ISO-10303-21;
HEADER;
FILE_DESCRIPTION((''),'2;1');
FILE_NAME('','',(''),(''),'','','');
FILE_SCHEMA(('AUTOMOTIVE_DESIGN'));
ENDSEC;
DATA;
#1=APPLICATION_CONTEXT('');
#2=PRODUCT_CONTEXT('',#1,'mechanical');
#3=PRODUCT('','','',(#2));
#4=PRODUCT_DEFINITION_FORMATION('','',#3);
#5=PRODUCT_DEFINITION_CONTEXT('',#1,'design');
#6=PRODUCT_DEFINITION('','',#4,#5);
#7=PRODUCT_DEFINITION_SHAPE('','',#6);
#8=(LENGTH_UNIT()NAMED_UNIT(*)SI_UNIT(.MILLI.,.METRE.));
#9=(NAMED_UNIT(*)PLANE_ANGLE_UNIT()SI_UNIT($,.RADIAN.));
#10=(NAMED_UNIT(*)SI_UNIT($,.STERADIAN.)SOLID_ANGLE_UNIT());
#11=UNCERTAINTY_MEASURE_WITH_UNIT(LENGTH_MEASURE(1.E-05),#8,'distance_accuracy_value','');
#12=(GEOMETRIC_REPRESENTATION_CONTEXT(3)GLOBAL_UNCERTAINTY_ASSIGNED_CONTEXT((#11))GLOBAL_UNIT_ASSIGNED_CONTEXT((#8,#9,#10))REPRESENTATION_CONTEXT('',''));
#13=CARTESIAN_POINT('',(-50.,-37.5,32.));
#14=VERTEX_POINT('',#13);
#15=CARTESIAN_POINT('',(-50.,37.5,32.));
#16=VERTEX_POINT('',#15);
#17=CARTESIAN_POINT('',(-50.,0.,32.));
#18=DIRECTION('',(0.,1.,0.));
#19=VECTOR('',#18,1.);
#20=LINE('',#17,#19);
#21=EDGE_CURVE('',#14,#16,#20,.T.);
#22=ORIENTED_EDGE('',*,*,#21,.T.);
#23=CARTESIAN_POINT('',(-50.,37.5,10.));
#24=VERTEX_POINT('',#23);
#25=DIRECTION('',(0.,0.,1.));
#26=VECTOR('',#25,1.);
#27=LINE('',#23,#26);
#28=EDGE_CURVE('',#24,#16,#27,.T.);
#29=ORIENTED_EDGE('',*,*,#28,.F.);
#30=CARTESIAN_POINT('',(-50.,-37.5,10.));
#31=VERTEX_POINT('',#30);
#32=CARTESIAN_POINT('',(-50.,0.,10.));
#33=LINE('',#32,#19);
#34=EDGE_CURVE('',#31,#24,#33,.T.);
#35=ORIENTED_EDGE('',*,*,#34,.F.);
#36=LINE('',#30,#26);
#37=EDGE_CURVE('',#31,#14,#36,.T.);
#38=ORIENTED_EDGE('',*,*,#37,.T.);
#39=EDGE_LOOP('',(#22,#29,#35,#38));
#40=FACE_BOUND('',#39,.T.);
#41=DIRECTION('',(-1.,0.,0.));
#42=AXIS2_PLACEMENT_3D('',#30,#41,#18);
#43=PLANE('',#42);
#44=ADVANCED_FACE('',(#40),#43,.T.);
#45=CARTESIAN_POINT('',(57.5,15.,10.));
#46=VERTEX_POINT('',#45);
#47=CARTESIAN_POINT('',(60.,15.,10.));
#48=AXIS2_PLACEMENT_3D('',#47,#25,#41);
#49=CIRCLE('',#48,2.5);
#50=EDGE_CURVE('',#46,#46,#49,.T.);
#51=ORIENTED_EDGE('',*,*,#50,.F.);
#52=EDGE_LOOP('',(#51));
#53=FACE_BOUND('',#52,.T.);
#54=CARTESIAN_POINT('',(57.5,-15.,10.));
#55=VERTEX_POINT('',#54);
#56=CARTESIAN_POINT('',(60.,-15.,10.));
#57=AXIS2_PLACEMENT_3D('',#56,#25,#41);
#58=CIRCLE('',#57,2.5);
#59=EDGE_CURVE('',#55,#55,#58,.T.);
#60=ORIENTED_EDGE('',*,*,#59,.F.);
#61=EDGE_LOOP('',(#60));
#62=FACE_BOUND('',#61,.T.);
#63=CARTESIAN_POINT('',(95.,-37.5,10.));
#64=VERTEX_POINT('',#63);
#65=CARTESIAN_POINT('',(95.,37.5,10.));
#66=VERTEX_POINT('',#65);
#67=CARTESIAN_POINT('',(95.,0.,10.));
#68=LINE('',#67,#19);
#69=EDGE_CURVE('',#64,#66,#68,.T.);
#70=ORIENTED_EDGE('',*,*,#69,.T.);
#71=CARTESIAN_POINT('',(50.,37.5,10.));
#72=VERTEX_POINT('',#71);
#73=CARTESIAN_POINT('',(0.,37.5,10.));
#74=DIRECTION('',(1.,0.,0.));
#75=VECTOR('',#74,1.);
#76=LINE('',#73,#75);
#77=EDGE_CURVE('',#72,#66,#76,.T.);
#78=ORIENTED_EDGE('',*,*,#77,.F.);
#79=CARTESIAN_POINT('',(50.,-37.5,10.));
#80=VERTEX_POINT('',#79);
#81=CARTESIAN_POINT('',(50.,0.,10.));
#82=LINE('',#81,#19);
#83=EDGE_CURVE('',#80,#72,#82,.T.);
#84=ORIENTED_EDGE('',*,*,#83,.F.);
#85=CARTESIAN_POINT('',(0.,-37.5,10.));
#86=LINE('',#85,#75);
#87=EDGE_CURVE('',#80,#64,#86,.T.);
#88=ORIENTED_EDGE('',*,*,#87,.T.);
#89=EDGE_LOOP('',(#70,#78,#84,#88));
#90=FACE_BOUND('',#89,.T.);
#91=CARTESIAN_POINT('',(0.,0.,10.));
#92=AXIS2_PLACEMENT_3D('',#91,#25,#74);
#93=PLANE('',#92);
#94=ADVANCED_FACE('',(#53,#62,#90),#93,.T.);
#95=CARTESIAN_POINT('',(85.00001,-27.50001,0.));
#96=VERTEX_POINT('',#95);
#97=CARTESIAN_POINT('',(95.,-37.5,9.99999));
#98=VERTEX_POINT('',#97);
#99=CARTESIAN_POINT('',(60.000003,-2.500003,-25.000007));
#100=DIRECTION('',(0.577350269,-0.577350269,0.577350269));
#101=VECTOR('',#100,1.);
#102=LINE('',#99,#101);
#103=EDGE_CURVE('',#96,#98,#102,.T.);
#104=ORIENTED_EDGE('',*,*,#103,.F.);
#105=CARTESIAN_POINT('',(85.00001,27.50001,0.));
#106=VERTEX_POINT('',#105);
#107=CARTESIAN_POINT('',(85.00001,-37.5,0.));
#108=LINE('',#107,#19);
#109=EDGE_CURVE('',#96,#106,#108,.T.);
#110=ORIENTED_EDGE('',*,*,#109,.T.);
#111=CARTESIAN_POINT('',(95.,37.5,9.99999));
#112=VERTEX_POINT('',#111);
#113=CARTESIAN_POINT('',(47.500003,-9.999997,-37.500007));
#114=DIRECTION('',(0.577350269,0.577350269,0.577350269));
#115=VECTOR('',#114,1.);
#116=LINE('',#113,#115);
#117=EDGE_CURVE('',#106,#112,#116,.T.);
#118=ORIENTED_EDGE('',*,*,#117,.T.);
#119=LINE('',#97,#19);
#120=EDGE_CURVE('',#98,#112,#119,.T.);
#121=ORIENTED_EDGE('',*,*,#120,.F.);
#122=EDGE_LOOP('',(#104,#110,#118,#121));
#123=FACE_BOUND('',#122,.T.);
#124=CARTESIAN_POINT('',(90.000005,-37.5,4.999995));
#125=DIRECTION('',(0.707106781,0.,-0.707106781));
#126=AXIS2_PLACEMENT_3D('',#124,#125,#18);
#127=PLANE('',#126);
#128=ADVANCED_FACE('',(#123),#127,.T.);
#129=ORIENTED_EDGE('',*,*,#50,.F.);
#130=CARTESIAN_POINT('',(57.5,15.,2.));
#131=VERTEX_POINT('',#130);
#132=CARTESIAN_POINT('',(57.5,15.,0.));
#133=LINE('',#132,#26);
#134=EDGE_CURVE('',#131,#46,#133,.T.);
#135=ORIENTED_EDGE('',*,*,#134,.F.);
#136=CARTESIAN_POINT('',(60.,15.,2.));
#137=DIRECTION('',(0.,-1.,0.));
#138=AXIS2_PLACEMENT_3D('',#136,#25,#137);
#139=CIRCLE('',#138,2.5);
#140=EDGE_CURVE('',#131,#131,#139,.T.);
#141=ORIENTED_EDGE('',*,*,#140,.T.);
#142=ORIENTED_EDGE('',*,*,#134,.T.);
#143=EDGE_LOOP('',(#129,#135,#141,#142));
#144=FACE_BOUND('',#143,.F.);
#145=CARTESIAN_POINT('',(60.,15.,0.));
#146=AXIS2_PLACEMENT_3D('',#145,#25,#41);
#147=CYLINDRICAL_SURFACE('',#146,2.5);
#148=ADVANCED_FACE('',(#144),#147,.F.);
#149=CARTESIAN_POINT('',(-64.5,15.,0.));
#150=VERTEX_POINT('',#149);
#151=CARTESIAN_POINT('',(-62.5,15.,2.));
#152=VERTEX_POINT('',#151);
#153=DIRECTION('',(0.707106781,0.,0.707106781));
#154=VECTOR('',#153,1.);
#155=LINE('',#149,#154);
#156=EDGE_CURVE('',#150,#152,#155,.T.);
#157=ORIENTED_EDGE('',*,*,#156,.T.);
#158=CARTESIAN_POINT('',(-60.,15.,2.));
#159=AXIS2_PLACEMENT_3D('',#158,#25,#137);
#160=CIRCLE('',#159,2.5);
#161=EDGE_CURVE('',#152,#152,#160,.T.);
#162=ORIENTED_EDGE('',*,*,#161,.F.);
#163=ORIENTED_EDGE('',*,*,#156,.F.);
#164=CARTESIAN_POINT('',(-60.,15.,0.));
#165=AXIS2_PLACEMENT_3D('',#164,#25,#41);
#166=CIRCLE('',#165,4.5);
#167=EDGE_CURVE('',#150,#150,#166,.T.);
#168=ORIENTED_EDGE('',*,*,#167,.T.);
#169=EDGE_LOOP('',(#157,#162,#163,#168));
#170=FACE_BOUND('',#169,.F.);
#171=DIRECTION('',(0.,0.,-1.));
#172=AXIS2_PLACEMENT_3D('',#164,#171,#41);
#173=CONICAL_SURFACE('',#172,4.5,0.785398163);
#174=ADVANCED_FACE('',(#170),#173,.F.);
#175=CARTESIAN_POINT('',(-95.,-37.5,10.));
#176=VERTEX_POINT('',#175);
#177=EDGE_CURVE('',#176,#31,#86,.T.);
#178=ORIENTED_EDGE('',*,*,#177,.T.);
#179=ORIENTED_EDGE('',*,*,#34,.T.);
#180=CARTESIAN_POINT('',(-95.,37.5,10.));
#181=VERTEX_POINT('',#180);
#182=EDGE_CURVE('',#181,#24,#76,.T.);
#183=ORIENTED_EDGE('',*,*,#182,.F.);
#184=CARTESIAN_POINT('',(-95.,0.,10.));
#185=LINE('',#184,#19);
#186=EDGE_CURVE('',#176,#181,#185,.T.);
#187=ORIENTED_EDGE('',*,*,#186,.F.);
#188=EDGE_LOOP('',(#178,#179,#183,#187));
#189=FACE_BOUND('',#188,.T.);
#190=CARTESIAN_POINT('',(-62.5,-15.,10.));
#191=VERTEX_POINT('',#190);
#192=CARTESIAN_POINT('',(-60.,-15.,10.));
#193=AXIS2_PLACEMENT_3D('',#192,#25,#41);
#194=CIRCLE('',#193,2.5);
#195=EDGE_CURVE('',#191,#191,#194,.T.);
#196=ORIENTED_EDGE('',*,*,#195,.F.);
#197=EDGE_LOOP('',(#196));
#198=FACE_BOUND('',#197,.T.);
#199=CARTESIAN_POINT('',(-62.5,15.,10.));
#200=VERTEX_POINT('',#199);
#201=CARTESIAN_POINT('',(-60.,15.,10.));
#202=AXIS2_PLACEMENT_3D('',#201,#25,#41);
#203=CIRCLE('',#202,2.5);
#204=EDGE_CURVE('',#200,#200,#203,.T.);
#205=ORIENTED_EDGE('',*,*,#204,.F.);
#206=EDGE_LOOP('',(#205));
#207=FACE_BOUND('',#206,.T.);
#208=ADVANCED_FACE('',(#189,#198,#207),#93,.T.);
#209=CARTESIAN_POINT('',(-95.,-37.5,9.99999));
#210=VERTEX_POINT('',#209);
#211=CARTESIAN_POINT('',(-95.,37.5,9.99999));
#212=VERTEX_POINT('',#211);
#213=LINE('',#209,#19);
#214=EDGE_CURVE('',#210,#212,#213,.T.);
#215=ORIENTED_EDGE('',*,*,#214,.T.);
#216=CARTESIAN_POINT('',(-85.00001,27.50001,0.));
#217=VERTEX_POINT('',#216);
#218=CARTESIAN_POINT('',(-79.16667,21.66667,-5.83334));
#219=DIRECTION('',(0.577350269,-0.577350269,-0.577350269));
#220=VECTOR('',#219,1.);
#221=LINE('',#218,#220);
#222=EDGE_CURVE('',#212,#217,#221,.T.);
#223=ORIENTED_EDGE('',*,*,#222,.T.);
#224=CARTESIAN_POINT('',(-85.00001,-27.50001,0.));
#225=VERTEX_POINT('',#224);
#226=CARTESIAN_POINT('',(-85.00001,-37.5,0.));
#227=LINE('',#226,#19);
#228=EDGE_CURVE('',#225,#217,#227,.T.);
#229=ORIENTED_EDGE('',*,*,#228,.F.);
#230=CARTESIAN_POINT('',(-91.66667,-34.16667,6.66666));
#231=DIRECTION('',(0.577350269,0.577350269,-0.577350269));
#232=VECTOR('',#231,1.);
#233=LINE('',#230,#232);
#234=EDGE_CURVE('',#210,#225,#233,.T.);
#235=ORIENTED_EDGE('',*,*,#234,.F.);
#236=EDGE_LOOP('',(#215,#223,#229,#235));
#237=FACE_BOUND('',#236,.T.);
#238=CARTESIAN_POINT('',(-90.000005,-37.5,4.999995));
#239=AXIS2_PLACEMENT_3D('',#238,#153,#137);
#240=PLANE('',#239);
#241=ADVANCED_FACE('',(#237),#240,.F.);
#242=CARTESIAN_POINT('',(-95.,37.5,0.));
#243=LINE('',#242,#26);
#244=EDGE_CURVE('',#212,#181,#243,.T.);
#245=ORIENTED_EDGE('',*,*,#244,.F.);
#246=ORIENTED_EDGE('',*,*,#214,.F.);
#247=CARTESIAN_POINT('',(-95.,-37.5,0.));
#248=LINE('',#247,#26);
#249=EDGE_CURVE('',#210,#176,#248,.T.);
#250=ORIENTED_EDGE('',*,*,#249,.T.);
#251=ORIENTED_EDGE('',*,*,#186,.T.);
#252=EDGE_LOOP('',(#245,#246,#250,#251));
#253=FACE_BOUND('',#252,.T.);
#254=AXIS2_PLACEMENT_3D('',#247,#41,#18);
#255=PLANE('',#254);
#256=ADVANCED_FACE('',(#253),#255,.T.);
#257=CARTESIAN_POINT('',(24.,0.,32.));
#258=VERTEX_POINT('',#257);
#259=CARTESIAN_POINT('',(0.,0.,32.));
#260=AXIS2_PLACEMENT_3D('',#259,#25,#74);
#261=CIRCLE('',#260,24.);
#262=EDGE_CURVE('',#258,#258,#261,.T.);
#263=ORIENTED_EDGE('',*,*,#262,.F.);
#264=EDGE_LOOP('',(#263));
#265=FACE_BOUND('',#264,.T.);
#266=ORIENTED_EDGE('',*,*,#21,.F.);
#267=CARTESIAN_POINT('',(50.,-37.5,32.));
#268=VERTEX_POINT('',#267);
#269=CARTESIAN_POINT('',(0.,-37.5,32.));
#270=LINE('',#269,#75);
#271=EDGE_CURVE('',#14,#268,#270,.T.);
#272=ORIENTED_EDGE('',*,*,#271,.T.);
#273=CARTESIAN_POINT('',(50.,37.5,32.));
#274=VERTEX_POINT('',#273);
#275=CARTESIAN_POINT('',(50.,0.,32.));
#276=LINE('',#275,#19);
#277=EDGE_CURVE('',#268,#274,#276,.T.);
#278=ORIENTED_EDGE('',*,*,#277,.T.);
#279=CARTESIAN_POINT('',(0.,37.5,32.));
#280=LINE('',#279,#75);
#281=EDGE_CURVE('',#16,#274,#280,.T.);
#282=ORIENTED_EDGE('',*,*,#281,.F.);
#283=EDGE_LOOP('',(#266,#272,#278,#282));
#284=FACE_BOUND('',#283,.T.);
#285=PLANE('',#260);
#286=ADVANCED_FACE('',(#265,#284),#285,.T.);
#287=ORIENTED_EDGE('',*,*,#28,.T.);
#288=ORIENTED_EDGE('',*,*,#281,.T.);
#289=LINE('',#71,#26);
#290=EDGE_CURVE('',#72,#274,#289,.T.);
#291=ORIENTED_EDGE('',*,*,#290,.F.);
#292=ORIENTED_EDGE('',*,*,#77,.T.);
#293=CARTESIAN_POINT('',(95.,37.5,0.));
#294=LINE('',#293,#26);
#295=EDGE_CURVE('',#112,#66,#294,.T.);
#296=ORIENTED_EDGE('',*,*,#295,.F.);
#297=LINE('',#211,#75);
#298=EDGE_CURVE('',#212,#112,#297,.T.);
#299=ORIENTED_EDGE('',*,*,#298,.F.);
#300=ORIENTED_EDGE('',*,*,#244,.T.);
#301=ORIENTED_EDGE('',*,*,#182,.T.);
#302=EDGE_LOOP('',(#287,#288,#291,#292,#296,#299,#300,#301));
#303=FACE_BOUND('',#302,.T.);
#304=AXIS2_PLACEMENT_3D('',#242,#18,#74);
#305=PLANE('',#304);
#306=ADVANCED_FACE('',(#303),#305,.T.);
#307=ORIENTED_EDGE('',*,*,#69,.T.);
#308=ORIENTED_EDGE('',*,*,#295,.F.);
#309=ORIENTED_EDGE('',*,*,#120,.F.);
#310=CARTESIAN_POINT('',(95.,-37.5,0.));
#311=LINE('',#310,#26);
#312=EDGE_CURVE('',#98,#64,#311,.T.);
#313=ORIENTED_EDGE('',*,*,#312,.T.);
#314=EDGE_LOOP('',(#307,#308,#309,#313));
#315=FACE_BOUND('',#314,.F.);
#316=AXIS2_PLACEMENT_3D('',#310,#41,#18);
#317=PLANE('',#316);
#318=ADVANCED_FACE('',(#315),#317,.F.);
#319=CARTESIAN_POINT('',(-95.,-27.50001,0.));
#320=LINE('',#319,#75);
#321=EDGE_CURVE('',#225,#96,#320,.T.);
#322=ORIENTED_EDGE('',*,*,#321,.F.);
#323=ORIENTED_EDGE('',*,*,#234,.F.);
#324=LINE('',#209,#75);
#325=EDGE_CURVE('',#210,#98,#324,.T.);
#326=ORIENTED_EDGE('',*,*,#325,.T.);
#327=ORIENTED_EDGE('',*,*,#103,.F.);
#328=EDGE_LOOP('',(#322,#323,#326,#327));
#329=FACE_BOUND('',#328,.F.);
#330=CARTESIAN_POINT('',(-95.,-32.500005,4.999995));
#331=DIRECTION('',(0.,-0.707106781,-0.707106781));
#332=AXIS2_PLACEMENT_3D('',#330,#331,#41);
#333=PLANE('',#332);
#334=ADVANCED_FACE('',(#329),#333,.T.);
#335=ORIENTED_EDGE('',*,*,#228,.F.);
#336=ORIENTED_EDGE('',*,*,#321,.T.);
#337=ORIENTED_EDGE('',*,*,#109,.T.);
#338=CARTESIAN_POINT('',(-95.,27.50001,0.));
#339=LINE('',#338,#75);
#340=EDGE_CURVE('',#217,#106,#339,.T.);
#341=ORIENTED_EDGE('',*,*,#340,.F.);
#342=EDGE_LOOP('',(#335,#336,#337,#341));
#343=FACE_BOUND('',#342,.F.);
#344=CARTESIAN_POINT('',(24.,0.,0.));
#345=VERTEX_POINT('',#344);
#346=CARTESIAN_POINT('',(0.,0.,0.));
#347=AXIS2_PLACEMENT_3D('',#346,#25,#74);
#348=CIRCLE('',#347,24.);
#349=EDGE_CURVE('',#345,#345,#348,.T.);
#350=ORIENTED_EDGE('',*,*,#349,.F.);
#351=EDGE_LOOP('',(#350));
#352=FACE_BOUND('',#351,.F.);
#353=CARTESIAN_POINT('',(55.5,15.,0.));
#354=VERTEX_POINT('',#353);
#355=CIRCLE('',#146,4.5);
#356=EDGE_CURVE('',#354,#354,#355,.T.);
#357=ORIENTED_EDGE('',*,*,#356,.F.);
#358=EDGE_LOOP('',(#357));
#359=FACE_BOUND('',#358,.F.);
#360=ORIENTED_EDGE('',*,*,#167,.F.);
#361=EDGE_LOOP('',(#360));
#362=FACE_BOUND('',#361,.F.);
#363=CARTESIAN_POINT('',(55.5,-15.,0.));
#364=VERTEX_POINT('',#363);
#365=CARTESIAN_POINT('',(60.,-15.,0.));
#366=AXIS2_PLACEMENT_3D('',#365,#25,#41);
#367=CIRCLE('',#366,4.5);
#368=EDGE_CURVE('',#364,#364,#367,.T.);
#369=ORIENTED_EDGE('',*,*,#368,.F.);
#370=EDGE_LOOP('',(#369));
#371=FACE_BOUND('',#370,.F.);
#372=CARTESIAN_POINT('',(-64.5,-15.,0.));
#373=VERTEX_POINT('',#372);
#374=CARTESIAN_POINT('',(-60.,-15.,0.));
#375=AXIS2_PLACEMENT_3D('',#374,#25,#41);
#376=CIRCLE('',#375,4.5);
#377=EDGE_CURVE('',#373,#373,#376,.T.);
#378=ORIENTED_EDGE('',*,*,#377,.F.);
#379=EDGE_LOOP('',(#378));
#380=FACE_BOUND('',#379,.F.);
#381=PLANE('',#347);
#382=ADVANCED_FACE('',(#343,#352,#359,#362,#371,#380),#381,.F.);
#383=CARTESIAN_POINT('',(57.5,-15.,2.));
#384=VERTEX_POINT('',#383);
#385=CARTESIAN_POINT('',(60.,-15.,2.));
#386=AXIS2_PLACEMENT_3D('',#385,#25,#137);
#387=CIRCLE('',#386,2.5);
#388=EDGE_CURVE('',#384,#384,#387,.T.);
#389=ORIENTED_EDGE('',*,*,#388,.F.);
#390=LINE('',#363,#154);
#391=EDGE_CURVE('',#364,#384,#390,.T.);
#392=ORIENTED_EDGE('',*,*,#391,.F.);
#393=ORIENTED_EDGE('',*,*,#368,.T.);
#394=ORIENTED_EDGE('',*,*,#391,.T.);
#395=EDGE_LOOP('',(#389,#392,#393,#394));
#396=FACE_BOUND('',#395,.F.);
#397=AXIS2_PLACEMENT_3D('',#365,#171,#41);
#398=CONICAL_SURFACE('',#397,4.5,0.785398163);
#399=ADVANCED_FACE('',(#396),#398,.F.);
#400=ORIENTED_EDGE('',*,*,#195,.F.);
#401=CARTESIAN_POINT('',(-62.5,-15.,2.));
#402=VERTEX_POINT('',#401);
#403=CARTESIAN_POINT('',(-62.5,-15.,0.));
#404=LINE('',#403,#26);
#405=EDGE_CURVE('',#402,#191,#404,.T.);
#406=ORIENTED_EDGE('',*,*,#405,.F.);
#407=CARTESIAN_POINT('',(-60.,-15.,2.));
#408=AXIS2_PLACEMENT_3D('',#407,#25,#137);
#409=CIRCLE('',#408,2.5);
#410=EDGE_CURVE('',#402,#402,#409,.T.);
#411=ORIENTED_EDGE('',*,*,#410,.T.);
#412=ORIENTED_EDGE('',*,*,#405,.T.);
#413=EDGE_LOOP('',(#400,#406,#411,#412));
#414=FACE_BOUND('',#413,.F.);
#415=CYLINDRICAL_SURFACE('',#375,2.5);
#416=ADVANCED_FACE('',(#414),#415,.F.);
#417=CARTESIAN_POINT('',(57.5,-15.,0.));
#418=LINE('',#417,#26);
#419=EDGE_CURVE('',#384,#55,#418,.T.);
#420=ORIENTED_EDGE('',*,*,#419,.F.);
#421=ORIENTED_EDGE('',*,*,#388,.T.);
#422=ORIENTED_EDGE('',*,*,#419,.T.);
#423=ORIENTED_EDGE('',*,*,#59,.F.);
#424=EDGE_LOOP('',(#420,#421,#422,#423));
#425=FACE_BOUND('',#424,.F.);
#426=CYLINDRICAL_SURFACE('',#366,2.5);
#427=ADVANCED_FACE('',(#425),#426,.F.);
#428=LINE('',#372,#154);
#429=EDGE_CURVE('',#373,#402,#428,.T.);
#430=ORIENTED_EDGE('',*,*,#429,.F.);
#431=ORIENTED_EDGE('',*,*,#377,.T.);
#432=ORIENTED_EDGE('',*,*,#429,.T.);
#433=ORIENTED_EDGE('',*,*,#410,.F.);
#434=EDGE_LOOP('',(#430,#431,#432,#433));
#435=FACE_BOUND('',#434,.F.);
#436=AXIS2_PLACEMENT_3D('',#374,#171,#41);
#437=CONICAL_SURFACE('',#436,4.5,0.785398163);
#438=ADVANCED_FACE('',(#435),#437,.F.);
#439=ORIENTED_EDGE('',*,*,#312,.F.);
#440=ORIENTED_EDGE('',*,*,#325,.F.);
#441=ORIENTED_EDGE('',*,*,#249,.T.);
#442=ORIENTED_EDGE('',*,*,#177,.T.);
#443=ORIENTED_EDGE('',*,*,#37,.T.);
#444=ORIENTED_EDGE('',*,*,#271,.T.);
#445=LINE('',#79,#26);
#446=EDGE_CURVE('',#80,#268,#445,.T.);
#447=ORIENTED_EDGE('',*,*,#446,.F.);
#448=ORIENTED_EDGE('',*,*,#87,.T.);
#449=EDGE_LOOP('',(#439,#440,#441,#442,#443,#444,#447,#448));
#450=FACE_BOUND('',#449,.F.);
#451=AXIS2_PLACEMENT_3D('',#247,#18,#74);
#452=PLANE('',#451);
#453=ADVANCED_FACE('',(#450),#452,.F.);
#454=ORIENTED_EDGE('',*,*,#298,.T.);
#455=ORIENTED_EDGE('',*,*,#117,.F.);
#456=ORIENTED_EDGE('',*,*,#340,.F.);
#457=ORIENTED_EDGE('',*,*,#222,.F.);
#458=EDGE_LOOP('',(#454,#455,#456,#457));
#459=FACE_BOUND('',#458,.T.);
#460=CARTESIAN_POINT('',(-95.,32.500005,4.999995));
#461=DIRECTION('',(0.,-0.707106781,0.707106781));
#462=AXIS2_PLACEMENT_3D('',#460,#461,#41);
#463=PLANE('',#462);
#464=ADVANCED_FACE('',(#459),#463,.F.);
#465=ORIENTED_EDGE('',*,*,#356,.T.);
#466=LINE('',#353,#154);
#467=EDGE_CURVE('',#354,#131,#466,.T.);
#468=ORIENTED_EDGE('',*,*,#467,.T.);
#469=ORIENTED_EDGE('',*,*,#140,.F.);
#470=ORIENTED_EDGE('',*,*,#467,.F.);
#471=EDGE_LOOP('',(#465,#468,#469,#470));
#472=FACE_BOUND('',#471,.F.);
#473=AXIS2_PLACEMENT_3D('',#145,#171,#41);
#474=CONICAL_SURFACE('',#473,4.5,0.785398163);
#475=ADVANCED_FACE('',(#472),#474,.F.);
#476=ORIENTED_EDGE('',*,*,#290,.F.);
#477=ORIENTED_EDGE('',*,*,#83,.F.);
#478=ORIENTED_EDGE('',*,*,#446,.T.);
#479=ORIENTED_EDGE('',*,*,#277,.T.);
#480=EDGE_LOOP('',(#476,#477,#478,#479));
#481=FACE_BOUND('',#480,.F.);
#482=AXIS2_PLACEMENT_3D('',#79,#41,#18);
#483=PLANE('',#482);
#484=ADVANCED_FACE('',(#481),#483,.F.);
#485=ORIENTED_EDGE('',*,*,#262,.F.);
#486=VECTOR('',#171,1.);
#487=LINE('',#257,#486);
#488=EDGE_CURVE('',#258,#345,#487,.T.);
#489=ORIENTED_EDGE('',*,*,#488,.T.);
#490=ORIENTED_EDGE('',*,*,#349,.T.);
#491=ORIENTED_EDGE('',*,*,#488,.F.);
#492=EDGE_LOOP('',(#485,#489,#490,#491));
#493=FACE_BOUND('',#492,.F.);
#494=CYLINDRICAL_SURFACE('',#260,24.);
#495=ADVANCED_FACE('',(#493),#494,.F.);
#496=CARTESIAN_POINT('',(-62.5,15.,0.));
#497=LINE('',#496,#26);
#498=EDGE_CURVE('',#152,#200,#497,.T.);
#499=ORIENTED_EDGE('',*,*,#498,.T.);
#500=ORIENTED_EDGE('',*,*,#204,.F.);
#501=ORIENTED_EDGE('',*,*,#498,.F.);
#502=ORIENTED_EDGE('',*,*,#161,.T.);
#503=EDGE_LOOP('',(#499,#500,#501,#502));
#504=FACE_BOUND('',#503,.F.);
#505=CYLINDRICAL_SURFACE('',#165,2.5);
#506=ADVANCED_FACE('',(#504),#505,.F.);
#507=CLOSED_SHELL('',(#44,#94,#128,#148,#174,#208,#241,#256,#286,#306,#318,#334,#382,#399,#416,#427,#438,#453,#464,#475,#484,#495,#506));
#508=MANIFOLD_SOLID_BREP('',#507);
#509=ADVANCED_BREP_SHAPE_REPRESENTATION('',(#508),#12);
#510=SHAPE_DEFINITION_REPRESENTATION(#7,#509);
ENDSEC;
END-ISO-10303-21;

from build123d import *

# Parameters (mm, degrees)
F0_W           = 190
F0_H           = 75
F1_DEPTH       = 10
F2_W           = 100
F2_H           = 75
F3_DEPTH       = 22
F4_R           = 24
F5_DEPTH       = 32.001
F6_SIZE        = 9.99999
F8_D           = 5
F8_CSINK_D     = 9
F8_CSINK_ANGLE = 90


# Not quite as in the source:
# - a fillet or chamfer is up to 0.001 mm smaller than in the source, because OpenCascade refuses the exact size


with BuildPart() as f1:
    # F0 (on Top) → F1 (new body)
    with BuildSketch(Plane.XY):
        Rectangle(F0_W, F0_H)
    extrude(amount=F1_DEPTH)

    # F2 (on face) → F3 (join)
    with BuildSketch(Plane.XY.offset(10)):
        Rectangle(F2_W, F2_H)
    extrude(amount=F3_DEPTH)

    # F4 (on face) → F5 (cut, through all)
    with BuildSketch(Plane.XY.offset(32)):
        Circle(F4_R)
    extrude(amount=-F5_DEPTH, mode=Mode.SUBTRACT)

    # F6 (size 10 in the source; OpenCascade refuses exactly that, so slightly less here)
    f6_edges = [f1.edges().sort_by_distance(p)[0] for p in [
        (95, 0, 0),
        (-95, 0, 0),
        (0, 37.5, 0),
        (0, -37.5, 0),
    ]]
    chamfer(f6_edges, length=F6_SIZE)

    # F8 (through all)
    with Locations(Plane(origin=(0, 0, 0), x_dir=(1, 0, 0), z_dir=(0, 0, -1))):
        with Locations((-60, 15), (-60, -15), (60, 15), (60, -15)):
            CounterSinkHole(F8_D / 2, F8_CSINK_D / 2, counter_sink_angle=F8_CSINK_ANGLE)


solid = f1.part
